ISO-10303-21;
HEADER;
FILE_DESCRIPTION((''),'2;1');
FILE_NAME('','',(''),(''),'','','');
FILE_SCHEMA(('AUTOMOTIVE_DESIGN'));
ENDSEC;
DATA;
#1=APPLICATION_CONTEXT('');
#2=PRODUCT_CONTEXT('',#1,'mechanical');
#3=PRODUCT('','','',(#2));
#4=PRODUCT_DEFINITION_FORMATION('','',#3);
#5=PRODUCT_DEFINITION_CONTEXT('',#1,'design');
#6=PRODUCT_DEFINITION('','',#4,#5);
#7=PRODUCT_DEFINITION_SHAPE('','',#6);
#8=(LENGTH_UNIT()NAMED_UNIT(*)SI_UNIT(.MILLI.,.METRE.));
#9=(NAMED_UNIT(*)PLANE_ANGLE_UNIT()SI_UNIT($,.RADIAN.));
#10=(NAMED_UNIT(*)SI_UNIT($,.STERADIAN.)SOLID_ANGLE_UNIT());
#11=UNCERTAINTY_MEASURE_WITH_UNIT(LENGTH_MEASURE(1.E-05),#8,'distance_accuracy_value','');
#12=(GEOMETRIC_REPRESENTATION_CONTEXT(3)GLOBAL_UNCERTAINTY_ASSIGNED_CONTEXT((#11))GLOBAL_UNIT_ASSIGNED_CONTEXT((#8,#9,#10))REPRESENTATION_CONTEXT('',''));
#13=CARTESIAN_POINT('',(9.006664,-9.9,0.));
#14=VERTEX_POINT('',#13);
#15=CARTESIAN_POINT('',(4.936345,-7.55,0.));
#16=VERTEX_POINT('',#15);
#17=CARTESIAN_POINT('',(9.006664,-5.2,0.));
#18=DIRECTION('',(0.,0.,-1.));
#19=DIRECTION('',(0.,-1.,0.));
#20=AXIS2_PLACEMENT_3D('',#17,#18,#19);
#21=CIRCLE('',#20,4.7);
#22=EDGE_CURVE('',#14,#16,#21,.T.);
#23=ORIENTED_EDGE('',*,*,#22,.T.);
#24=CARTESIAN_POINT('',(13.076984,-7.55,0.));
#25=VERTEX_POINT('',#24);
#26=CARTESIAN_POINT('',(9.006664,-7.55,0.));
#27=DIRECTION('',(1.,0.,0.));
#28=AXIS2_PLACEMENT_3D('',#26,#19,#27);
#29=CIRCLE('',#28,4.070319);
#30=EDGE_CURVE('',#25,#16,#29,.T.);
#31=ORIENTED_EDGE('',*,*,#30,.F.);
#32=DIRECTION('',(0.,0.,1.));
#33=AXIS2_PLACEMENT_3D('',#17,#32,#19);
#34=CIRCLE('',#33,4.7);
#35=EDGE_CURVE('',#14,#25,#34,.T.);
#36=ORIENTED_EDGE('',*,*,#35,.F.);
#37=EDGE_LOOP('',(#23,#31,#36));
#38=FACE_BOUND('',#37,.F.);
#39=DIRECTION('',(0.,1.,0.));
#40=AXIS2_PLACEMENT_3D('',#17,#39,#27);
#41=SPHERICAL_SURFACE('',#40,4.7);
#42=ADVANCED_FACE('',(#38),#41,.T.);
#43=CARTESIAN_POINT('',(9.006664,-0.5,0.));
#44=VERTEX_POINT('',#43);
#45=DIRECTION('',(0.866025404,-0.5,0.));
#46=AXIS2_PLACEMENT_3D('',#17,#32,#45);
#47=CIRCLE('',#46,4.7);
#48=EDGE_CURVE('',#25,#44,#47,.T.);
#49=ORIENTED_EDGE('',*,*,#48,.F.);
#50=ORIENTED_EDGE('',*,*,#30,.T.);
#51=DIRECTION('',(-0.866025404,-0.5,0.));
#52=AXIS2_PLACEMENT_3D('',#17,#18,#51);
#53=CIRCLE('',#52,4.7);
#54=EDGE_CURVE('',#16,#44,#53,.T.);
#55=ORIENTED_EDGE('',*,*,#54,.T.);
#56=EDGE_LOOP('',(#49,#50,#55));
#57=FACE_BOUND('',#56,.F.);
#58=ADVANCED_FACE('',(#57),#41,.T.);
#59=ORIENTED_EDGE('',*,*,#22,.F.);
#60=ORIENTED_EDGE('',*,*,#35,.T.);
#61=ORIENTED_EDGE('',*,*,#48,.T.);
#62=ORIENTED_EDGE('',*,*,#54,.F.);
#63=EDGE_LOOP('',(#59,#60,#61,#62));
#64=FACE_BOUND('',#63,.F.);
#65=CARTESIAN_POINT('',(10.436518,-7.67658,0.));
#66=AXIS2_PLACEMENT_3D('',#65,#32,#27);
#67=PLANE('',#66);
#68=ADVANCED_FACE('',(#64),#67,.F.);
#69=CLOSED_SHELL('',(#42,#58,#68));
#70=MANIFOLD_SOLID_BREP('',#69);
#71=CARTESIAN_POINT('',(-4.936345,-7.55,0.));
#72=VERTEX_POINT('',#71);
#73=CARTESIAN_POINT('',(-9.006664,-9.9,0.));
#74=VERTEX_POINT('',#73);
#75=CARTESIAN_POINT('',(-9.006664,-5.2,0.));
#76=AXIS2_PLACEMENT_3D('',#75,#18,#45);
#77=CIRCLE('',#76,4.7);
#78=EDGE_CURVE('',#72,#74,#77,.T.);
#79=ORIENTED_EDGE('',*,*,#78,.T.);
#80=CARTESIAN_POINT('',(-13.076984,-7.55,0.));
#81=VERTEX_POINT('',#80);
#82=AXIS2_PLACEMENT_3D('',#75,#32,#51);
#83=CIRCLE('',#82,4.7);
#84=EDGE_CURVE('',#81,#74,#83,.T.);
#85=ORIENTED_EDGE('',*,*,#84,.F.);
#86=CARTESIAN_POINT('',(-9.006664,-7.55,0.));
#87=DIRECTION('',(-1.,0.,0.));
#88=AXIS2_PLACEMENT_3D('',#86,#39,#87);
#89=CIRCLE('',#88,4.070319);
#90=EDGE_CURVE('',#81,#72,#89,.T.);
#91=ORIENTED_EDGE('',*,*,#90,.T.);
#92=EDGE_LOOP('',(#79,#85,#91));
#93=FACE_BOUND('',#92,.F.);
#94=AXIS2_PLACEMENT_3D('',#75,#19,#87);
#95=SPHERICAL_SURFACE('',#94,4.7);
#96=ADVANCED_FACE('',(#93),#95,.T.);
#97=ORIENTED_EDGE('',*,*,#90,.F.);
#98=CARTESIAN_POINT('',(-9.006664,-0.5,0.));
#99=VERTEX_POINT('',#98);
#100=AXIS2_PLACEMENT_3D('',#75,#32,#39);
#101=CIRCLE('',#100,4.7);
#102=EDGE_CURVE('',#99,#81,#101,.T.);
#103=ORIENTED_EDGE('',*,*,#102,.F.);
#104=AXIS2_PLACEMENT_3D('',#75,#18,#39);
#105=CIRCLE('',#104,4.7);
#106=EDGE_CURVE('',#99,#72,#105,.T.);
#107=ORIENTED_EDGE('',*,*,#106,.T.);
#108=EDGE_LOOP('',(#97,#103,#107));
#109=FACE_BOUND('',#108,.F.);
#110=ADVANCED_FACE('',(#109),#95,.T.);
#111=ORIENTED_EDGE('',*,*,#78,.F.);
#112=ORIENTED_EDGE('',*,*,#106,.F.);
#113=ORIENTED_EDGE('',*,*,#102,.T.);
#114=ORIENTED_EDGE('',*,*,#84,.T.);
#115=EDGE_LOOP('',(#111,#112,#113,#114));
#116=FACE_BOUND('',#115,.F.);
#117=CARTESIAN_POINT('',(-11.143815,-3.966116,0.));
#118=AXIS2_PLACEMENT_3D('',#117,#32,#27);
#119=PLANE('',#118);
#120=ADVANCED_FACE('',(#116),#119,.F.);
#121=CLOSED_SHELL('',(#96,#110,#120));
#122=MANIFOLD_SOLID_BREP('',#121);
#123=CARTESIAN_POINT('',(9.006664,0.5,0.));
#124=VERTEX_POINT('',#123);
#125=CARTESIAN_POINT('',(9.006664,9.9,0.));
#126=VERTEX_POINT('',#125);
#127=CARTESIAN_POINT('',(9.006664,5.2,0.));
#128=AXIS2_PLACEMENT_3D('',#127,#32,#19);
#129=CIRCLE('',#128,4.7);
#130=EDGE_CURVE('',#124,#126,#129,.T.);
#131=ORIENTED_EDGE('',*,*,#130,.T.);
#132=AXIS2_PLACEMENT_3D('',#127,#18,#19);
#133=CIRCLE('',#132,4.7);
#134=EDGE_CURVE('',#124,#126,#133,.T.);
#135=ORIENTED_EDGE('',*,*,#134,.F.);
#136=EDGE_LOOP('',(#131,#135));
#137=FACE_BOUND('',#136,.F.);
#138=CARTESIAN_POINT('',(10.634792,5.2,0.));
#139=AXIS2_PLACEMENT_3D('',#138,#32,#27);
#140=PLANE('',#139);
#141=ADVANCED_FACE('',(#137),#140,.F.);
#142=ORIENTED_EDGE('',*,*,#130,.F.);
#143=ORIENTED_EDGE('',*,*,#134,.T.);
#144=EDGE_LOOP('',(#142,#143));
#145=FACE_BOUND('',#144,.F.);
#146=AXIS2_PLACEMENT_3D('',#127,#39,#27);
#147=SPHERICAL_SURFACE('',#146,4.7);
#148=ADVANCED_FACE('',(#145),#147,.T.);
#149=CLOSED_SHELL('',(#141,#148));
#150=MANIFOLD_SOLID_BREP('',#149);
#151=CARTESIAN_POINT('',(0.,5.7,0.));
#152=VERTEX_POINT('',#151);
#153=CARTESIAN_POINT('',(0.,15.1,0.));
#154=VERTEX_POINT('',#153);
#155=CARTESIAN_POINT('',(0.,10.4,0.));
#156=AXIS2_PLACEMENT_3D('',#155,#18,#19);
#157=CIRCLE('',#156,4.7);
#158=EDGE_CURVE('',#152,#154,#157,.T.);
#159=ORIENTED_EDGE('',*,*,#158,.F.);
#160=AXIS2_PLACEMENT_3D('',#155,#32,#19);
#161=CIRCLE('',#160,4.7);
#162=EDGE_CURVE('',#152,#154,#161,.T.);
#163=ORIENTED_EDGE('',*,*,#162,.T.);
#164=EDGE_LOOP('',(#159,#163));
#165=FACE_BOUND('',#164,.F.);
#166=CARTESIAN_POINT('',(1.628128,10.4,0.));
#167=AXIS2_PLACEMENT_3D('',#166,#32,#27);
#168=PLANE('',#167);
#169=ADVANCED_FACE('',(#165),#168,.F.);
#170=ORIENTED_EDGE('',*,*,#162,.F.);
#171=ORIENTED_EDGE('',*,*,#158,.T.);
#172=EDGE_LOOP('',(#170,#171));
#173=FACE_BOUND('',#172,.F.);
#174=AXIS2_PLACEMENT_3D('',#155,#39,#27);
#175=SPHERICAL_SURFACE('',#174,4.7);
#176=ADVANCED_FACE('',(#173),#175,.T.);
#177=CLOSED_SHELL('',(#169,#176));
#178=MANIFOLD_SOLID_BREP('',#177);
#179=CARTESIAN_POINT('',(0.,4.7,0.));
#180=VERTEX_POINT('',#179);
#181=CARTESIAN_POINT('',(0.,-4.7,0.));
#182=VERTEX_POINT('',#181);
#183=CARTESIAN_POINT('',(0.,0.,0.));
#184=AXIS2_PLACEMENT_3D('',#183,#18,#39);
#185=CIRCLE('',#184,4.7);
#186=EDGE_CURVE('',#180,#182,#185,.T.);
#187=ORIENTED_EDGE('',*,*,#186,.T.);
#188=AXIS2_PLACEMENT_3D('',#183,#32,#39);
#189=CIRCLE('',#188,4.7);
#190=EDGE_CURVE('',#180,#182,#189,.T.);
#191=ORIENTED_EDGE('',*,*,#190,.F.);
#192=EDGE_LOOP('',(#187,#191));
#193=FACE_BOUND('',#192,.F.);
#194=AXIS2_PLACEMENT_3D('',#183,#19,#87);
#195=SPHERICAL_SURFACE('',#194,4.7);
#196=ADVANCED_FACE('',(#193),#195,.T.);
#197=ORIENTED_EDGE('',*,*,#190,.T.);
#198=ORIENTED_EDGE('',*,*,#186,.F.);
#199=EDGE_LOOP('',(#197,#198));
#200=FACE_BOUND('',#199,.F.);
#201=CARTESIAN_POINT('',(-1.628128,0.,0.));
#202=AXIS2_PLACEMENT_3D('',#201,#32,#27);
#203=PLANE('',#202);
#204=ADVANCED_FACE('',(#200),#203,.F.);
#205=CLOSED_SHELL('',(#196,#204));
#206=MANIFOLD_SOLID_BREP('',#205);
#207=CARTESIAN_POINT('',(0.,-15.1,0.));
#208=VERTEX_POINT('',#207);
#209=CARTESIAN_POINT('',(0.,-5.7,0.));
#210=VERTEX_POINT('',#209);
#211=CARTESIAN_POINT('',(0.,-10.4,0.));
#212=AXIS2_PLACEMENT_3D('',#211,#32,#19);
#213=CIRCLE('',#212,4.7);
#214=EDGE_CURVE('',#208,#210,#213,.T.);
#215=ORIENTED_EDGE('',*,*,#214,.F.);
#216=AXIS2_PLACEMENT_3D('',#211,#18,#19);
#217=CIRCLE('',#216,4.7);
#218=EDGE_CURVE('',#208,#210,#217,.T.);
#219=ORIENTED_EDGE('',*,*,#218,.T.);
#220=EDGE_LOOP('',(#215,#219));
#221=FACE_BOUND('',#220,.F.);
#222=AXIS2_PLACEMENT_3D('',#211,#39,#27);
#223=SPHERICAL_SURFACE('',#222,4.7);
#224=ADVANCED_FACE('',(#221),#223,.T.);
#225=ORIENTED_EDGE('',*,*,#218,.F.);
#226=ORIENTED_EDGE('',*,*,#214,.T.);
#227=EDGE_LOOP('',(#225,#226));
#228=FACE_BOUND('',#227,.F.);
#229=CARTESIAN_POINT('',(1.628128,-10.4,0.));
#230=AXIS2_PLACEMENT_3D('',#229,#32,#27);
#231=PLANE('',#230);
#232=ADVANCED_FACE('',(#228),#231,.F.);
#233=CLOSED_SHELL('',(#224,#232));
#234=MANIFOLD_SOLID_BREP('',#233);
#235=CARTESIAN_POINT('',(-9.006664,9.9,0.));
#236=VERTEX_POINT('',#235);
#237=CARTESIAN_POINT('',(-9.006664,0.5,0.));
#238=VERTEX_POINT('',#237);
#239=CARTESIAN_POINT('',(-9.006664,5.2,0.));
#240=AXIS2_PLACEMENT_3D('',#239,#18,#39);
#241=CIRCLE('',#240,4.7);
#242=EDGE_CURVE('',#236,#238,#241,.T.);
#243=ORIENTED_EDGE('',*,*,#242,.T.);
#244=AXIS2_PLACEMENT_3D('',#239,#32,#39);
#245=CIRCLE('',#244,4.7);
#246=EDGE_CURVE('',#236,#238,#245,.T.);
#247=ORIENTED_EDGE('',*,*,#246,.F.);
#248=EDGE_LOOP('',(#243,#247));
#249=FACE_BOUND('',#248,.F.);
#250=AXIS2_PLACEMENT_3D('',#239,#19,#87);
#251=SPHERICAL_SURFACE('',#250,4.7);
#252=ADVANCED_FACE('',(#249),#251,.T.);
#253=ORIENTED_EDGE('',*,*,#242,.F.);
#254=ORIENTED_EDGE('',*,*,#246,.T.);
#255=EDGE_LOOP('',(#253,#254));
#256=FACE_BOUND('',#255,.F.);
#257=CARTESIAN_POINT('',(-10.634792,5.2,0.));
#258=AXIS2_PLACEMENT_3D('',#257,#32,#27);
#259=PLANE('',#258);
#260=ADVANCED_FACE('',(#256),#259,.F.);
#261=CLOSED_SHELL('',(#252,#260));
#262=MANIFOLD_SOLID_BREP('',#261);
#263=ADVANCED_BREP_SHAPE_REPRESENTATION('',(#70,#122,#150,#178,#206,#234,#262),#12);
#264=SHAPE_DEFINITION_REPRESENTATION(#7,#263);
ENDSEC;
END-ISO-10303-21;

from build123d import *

# Parameters (mm, degrees)
F1_ANGLE = 180
F3_ANGLE = 180
F4_ANGLE = 180
F5_ANGLE = 180


with BuildPart() as f1:
    # F0 (on Top) → F1 (revolve)
    with BuildSketch(Plane.XY):
        with BuildLine():
            Line((0, -4.7), (0, 4.7))
            ThreePointArc((0, 4.7), (-4.7, 0), (0, -4.7))
        make_face()
    revolve(axis=Axis((0, 0, 0), (0, 1, 0)), revolution_arc=F1_ANGLE)


with BuildPart() as f3:
    # F2 (on Top) → F3 (revolve)
    with BuildSketch(Plane.XY):
        with BuildLine():
            ThreePointArc((0, 5.7), (4.7, 10.4), (0, 15.1))
            Line((0, 15.1), (0, 5.7))
        make_face()
    revolve(axis=Axis((0, 10.4, 0), (0, -1, 0)), revolution_arc=F3_ANGLE)


with BuildPart() as f3b:
    # F2 (on Top) → F3, piece 2 (revolve)
    with BuildSketch(Plane.XY):
        with BuildLine():
            ThreePointArc((0, -15.1), (4.7, -10.4), (0, -5.7))
            Line((0, -5.7), (0, -15.1))
        make_face()
    revolve(axis=Axis((0, 10.4, 0), (0, -1, 0)), revolution_arc=F3_ANGLE)


with BuildPart() as f4:
    # F2 (on Top) → F4 (revolve)
    with BuildSketch(Plane.XY):
        with BuildLine():
            Line((-9.0066641994, -5.2), (-9.0066641994, -0.5))
            ThreePointArc((-9.0066641994, -0.5), (-13.0769835971, -2.85), (-13.0769835971, -7.55))
            Line((-13.0769835971, -7.55), (-9.0066641994, -5.2))
        make_face()
        with BuildLine():
            Line((-9.0066641994, -9.9), (-9.0066641994, -5.2))
            Line((-9.0066641994, -5.2), (-13.0769835971, -7.55))
            ThreePointArc((-13.0769835971, -7.55), (-11.3566641994, -9.2703193978), (-9.0066641994, -9.9))
        make_face()
    revolve(axis=Axis((-9.0066641994, 5.2, 0), (0, 1, 0)), revolution_arc=F4_ANGLE)


with BuildPart() as f4b:
    # F2 (on Top) → F4, piece 2 (revolve)
    with BuildSketch(Plane.XY):
        with BuildLine():
            Line((-9.0066641994, 0.5), (-9.0066641994, 9.9))
            ThreePointArc((-9.0066641994, 9.9), (-13.7066641994, 5.2), (-9.0066641994, 0.5))
        make_face()
    revolve(axis=Axis((-9.0066641994, 5.2, 0), (0, 1, 0)), revolution_arc=F4_ANGLE)


with BuildPart() as f5:
    # F2 (on Top) → F5 (revolve)
    with BuildSketch(Plane.XY):
        with BuildLine():
            ThreePointArc((9.0066641994, 0.5), (13.7066641994, 5.2), (9.0066641994, 9.9))
            Line((9.0066641994, 9.9), (9.0066641994, 0.5))
        make_face()
    revolve(axis=Axis((9.0066641994, 5.2, 0), (0, -1, 0)), revolution_arc=F5_ANGLE)


with BuildPart() as f5b:
    # F2 (on Top) → F5, piece 2 (revolve)
    with BuildSketch(Plane.XY):
        with BuildLine():
            Line((13.0769835971, -7.55), (9.0066641994, -5.2))
            Line((9.0066641994, -5.2), (9.0066641994, -9.9))
            ThreePointArc((9.0066641994, -9.9), (11.3566641994, -9.2703193978), (13.0769835971, -7.55))
        make_face()
        with BuildLine():
            ThreePointArc((13.0769835971, -7.55), (13.0769835971, -2.85), (9.0066641994, -0.5))
            Line((9.0066641994, -0.5), (9.0066641994, -5.2))
            Line((9.0066641994, -5.2), (13.0769835971, -7.55))
        make_face()
    revolve(axis=Axis((9.0066641994, 5.2, 0), (0, -1, 0)), revolution_arc=F5_ANGLE)


solid = Compound([f1.part, f3.part, f3b.part, f4.part, f4b.part, f5.part, f5b.part])
